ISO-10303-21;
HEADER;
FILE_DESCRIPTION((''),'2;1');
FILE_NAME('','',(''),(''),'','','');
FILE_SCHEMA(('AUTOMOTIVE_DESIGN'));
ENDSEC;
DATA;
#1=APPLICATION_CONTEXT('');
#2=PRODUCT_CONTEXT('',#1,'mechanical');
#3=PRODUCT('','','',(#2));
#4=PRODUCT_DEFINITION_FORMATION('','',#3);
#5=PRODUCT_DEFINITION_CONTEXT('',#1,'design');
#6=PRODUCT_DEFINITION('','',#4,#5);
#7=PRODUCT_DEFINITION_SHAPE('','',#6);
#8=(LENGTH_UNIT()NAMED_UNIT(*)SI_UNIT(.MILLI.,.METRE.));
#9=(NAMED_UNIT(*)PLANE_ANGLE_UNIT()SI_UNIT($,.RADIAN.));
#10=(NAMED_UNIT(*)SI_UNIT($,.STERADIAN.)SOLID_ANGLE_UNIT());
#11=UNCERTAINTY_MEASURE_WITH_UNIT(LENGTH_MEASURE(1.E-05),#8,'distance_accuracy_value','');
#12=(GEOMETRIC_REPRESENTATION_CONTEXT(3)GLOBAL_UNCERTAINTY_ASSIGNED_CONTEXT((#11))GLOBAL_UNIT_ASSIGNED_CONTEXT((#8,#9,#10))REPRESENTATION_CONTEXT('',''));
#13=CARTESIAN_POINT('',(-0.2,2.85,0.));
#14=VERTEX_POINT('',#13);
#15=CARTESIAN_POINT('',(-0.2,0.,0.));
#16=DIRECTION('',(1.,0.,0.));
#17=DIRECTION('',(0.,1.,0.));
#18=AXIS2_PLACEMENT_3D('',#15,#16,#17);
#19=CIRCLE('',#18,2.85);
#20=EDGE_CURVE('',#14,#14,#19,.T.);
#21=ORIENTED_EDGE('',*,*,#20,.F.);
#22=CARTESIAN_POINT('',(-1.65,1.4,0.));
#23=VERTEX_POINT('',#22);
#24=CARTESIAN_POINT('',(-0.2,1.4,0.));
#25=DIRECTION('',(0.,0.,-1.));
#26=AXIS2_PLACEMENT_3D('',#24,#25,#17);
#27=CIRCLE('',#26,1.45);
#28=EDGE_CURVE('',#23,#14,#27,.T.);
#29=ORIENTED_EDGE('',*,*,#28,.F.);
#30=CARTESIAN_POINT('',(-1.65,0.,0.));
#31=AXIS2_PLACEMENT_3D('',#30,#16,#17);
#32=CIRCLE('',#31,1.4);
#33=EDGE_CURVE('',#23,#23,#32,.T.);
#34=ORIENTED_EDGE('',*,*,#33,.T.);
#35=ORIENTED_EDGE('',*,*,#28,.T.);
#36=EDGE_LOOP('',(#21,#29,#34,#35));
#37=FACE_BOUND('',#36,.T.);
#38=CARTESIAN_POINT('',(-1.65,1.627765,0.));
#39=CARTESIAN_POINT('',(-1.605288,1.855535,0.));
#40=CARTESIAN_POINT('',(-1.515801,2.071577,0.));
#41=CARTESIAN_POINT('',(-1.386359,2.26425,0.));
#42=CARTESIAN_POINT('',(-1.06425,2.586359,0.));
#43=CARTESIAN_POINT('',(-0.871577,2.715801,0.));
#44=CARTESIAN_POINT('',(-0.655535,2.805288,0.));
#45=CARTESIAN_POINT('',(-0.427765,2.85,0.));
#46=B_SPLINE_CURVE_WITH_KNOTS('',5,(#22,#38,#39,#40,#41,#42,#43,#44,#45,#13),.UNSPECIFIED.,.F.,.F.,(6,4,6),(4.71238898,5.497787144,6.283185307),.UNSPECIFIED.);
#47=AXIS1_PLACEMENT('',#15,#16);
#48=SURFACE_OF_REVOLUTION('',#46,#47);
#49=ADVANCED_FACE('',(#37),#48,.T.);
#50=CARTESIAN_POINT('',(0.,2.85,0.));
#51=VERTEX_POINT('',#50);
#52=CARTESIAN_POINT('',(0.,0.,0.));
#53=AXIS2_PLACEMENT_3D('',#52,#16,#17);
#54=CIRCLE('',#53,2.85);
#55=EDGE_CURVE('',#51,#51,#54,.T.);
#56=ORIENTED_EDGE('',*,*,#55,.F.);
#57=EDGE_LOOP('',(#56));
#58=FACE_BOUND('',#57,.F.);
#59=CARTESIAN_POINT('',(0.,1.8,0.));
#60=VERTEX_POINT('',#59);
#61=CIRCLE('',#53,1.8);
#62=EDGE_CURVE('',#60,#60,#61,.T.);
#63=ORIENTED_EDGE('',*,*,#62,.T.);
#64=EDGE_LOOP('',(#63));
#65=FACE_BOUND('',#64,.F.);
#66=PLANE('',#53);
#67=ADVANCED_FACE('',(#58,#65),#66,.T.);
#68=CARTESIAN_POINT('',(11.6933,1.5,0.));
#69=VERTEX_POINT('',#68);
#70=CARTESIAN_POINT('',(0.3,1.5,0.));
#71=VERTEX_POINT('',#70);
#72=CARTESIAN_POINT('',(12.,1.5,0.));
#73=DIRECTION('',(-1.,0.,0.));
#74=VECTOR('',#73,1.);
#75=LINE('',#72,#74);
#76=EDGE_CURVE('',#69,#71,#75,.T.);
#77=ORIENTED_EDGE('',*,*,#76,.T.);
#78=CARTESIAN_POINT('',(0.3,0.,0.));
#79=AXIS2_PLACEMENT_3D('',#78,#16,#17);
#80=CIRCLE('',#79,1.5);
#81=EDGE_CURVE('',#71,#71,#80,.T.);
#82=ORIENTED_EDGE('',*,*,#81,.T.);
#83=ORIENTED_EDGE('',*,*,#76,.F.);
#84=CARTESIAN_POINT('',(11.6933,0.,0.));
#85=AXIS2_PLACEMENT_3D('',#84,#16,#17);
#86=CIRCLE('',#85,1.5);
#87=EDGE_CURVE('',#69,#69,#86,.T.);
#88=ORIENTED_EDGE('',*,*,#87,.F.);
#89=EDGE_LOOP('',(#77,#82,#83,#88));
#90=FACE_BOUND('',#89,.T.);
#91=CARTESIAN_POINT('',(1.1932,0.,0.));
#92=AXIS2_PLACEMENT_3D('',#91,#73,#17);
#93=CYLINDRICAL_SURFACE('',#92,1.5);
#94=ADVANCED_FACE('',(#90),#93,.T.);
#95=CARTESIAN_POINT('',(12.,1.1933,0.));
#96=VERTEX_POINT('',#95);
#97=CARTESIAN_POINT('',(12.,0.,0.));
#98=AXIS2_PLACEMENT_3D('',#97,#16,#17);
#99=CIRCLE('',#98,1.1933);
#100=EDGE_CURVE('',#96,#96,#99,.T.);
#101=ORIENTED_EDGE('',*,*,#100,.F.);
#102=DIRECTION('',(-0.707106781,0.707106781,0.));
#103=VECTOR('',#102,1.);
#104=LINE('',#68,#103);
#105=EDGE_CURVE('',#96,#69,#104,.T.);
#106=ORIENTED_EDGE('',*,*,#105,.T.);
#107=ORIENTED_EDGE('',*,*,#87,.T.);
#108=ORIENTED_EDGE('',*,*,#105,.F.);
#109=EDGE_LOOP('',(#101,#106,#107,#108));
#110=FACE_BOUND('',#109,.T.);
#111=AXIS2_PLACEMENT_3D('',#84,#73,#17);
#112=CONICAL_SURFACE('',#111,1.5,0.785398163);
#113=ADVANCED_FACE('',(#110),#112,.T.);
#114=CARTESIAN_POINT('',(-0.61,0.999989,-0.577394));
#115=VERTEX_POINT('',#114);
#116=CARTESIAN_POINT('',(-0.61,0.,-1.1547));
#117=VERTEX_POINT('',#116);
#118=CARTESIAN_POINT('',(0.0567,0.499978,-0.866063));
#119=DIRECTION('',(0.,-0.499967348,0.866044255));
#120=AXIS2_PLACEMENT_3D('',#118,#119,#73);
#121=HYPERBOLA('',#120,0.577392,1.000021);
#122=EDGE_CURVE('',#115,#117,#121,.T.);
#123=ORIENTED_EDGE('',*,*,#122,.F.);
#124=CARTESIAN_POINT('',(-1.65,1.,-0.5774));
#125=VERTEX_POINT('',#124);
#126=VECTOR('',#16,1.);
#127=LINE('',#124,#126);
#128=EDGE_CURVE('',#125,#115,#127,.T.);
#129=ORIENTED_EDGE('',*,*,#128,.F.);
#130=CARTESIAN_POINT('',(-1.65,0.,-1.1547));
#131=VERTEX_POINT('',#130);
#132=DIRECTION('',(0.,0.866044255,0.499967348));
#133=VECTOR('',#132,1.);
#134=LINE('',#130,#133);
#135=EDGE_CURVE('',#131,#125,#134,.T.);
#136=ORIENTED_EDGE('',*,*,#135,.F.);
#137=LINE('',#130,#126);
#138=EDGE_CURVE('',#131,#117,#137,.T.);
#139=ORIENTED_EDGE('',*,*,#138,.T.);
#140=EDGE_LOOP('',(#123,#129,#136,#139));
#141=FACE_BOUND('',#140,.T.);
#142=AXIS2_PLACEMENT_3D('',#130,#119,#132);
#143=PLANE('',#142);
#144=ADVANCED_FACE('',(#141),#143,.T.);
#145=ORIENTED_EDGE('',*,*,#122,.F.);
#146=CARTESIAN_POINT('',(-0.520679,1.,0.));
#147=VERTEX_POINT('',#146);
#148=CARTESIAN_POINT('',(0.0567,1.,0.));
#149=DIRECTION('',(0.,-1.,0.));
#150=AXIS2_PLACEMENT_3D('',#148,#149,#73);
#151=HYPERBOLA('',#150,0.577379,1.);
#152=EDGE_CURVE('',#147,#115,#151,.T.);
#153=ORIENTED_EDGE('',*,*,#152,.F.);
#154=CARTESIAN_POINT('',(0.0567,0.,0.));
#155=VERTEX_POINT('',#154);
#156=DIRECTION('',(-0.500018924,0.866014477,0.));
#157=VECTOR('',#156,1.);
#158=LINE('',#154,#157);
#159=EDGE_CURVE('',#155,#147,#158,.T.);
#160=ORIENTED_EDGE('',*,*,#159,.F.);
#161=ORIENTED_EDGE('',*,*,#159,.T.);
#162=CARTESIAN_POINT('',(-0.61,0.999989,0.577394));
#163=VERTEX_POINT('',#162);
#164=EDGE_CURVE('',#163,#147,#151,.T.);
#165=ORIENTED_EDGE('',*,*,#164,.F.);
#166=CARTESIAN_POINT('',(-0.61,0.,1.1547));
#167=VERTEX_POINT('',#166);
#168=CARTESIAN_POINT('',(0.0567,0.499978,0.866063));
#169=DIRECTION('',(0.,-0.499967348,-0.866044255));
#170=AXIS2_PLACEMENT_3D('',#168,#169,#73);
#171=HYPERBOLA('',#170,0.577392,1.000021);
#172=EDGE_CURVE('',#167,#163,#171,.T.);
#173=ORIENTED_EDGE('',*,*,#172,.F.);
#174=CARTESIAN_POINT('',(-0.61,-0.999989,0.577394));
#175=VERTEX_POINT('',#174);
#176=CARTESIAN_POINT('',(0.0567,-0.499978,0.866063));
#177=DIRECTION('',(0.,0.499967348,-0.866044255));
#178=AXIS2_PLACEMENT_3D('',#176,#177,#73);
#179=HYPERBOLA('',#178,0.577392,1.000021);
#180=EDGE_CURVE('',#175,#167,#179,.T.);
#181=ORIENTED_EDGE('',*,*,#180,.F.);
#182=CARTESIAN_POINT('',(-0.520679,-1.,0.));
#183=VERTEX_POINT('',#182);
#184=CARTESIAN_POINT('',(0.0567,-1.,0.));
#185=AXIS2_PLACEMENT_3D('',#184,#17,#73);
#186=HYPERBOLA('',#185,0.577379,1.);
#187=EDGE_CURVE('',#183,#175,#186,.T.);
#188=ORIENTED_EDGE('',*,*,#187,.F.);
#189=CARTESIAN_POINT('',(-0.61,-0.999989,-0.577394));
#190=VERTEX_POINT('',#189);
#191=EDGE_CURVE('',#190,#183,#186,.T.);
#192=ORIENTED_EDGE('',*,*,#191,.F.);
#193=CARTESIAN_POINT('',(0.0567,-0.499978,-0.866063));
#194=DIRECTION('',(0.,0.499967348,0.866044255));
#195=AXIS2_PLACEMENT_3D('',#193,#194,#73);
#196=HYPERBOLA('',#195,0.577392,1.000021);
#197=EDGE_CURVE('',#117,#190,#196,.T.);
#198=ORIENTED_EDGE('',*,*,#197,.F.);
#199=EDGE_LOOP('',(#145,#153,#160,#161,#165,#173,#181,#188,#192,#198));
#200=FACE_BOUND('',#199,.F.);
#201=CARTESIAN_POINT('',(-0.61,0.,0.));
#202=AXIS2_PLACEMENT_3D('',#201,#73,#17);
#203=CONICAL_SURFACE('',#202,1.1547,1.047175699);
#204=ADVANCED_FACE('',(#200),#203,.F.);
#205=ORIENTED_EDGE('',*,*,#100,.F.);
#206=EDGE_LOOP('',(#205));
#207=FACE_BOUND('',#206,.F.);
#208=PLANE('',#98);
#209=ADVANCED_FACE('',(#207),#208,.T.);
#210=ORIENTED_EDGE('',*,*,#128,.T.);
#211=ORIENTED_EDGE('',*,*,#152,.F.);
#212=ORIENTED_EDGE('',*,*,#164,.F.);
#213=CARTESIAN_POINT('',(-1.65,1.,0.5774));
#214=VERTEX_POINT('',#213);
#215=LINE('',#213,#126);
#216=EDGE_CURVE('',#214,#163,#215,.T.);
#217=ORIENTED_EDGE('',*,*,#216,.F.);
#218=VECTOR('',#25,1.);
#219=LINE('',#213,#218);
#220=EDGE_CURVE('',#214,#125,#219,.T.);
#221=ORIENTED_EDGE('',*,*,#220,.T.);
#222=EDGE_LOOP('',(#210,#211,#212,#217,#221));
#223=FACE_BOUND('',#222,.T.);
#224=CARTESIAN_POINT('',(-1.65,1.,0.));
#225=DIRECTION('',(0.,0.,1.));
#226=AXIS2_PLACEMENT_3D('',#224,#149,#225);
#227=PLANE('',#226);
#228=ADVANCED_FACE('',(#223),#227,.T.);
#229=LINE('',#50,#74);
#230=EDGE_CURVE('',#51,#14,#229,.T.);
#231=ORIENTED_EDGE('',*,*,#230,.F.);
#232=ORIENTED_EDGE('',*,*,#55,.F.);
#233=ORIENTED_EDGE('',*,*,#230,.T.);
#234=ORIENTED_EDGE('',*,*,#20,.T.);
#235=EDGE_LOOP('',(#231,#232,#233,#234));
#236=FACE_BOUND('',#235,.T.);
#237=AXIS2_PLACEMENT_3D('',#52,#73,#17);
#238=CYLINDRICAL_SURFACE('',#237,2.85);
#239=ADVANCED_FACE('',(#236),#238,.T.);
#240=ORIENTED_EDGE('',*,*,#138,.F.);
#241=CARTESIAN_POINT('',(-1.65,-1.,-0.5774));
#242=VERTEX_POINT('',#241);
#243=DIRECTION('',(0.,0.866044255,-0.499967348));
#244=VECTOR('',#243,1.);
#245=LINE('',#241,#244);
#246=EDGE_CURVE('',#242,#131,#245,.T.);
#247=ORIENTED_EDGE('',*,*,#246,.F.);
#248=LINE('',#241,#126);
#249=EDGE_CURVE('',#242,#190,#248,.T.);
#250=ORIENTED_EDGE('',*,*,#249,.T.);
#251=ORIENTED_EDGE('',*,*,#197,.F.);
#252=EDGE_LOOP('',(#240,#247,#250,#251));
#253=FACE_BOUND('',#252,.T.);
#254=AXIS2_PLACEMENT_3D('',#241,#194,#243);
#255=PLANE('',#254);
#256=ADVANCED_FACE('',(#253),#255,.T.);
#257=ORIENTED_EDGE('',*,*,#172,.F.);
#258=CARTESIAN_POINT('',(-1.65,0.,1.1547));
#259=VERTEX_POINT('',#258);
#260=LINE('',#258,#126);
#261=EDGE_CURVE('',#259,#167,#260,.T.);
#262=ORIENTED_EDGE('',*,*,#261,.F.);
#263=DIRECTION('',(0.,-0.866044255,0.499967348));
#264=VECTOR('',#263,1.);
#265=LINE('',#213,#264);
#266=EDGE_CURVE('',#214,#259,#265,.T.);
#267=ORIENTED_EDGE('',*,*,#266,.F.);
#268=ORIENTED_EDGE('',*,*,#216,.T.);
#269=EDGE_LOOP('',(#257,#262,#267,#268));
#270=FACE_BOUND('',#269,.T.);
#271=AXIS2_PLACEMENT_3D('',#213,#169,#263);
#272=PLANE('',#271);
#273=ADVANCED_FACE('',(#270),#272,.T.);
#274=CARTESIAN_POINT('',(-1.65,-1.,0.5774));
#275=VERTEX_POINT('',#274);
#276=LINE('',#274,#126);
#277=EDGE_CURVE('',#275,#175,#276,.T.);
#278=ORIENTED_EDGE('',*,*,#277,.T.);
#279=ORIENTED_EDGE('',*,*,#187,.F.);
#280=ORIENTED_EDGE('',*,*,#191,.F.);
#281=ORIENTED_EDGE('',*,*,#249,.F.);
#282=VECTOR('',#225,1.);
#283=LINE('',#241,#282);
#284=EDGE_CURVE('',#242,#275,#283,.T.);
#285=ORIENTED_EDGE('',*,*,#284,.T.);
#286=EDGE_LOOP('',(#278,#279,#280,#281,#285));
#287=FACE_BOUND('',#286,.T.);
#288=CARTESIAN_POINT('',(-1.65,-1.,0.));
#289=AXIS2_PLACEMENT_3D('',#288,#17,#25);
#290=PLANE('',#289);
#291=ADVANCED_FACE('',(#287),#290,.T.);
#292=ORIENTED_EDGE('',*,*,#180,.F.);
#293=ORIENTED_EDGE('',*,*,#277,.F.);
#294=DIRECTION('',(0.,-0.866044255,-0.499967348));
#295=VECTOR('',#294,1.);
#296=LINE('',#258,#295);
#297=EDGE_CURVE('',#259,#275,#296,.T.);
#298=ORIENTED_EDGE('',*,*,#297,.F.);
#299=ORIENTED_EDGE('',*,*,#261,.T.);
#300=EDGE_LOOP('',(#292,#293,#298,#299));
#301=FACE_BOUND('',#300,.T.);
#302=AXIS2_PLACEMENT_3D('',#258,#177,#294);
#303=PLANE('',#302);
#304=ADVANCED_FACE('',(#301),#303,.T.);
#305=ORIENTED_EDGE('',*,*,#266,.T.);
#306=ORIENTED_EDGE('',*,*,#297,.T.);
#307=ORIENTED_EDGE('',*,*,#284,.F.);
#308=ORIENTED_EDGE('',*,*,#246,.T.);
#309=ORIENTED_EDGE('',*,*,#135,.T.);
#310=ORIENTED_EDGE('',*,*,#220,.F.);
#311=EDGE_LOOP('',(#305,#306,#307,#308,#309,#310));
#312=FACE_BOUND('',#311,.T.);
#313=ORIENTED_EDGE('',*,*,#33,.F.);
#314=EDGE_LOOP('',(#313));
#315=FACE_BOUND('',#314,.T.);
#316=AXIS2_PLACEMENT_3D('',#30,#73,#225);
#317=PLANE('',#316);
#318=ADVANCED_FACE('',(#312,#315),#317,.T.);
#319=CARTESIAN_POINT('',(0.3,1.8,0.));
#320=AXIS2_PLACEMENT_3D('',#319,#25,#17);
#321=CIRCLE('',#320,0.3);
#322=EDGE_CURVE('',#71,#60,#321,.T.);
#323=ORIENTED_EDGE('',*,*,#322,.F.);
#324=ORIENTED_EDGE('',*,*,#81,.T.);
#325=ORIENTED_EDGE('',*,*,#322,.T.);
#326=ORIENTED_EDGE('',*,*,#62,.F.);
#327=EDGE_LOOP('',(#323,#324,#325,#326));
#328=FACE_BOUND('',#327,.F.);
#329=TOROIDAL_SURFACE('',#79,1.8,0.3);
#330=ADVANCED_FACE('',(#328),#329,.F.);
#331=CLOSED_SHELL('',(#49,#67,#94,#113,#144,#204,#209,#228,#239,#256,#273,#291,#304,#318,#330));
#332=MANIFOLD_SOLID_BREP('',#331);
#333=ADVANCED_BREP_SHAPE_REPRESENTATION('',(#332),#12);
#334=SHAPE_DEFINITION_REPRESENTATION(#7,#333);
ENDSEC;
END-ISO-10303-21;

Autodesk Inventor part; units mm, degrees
ref_plane "YZ Plane" through (0, 0, 0) normal (1, 0, 0) x (0, 1, 0)
ref_plane "XZ Plane" through (0, 0, 0) normal (0, 1, 0) x (-1, 0, 0)
sketch "Sketch1" plane through (0, 0, 0) normal (0, 0, 1) x (1, 0, 0)
  line L0 (0.0567, 0) -> (12, 0)
  line L1 (12, 0) -> (12, 1.5)
  line L2 (12, 1.5) -> (1.5, 1.5)
  line L3 (1.5, 1.5) -> (1.1932, 1.5)
  line L4 (1.1932, 1.5) -> (0, 1.5)
  line L5 (0, 1.5) -> (0, 2.85)
  line L6 (0, 2.85) -> (-1.65, 2.85)
  line L7 (-1.65, 2.85) -> (-1.65, 1.1547)
  line L8 (-1.65, 1.1547) -> (-0.61, 1.1547)
  line L9 (-0.61, 1.1547) -> (0.0567, 0)
  line L10 (-4.38, 0) -> (14.73, 0) projected
  line L11 (0, -0.57) -> (0, 3.42) projected
  line L12 (1.5, 1.5) -> (0, 1.5) construction
  dimension "d1" = 10.5
  dimension "d2" = 0.3068
  dimension "d3" = 1.65
  dimension "d4" = 1.04
  dimension "d5" = 60
  dimension "d6" = 3
  dimension "d7" = 3
  dimension "d8" = 2.3094
  dimension "d9" = 5.7
  dimension "d26" = 12
revolve "Body" add sketch "Sketch1" angle 360 about axis through (0.0567, 0, 0) along (1, 0, 0) contours L9 L11 L4 L3 L2 L1 L0 | L9 L8 L7 L6 L5 L11
sketch "Sketch2" plane through (-1.65, 0, 0) normal (-1, 0, 0) x (0, 0, 1)
  circle A0 centre (0, 0) radius 1.1547 projected
  line L0 (0, -3.99) -> (0, 3.99) projected
  line L1 (-3.99, 0) -> (3.99, 0) projected
  line L2 (1.1547, 0) -> (0.5774, -1)
  line L3 (0.5774, -1) -> (-0.5774, -1)
  line L4 (-0.5774, -1) -> (-1.1547, 0)
  line L5 (-1.1547, 0) -> (-0.5774, 1)
  line L6 (-0.5774, 1) -> (0.5774, 1)
  line L7 (0.5774, 1) -> (1.1547, 0)
extrude "Slot" add sketch "Sketch2" against normal up to next contours L7 A0 | A0 L2 | L6 L0 A0 | A0 L0 L3 | L0 L6 A0 | A0 L3 L0 | L4 A0 | A0 L5
fillet "Fillet1" radius 1.45 1 edges at (-1.65, -2.85, 0)
thread "Thread" size "M3x0.5" class "6g" standard "ISO Metric profile" length 10.5
chamfer "Chamfer1" distance 0.3067 distance2 0.3067 1 edges at (12, -1.5, 0) measured on face at (12, -0.6587, -0.1791)
ref_plane "Work Plane1" through (29, 0, 0) normal (0, -1, 0) x (1, 0, 0)
fillet "Fillet2" radius 0.3 1 edges at (0, -1.5, 0)
equation "\"d30\" = R"
equation "\"d17\" = RR"
equation "\"d13\" = GEL"
equation "\"d15\" = -0.5 * SPD + 0.5 * GD"
equation "\"d16\" = GUL"
equation "\"d1\" = GEL"
equation "\"d3\" = KOH"
equation "\"d4\" = INTI"
equation "\"d6\" = GD"
equation "\"d7\" = BDM"
equation "\"d8\" = 1.1547 * SW"
equation "\"d9\" = KOD"
equation "\"d26\" = NLG"
equation "\"GD\" = NND"
equation "\"NLG\" = 12"
equation "\"GEL\" = 10.5"
equation "\"KOD\" = 5.7"
equation "\"KOH\" = 1.65"
equation "\"INTI\" = 1.04"
equation "\"GAL\" = 0.61345 * PTC"
equation "\"GUL\" = 0.61345 * PTC"
equation "\"BDM\" = NND"
equation "\"SW\" = 2"
equation "\"RR\" = 1.45"
equation "\"SPD\" = NND - 1.2269 * PTC"
equation "\"R\" = 0.3"
equation "\"TOA\" = 30deg"
equation "\"GD1\" = THREADDIA - 1.2269 * PTC"
equation "\"THREADDIA\" = 3"
equation "\"PTC\" = 0.5"
equation "\"NND\" = 3"
equation "\"KOH1\" = 0.2"
equation "\"E0\" = 2.303"
properties part number "ISO 7380-1 - M3 x 12" material "Steel"
